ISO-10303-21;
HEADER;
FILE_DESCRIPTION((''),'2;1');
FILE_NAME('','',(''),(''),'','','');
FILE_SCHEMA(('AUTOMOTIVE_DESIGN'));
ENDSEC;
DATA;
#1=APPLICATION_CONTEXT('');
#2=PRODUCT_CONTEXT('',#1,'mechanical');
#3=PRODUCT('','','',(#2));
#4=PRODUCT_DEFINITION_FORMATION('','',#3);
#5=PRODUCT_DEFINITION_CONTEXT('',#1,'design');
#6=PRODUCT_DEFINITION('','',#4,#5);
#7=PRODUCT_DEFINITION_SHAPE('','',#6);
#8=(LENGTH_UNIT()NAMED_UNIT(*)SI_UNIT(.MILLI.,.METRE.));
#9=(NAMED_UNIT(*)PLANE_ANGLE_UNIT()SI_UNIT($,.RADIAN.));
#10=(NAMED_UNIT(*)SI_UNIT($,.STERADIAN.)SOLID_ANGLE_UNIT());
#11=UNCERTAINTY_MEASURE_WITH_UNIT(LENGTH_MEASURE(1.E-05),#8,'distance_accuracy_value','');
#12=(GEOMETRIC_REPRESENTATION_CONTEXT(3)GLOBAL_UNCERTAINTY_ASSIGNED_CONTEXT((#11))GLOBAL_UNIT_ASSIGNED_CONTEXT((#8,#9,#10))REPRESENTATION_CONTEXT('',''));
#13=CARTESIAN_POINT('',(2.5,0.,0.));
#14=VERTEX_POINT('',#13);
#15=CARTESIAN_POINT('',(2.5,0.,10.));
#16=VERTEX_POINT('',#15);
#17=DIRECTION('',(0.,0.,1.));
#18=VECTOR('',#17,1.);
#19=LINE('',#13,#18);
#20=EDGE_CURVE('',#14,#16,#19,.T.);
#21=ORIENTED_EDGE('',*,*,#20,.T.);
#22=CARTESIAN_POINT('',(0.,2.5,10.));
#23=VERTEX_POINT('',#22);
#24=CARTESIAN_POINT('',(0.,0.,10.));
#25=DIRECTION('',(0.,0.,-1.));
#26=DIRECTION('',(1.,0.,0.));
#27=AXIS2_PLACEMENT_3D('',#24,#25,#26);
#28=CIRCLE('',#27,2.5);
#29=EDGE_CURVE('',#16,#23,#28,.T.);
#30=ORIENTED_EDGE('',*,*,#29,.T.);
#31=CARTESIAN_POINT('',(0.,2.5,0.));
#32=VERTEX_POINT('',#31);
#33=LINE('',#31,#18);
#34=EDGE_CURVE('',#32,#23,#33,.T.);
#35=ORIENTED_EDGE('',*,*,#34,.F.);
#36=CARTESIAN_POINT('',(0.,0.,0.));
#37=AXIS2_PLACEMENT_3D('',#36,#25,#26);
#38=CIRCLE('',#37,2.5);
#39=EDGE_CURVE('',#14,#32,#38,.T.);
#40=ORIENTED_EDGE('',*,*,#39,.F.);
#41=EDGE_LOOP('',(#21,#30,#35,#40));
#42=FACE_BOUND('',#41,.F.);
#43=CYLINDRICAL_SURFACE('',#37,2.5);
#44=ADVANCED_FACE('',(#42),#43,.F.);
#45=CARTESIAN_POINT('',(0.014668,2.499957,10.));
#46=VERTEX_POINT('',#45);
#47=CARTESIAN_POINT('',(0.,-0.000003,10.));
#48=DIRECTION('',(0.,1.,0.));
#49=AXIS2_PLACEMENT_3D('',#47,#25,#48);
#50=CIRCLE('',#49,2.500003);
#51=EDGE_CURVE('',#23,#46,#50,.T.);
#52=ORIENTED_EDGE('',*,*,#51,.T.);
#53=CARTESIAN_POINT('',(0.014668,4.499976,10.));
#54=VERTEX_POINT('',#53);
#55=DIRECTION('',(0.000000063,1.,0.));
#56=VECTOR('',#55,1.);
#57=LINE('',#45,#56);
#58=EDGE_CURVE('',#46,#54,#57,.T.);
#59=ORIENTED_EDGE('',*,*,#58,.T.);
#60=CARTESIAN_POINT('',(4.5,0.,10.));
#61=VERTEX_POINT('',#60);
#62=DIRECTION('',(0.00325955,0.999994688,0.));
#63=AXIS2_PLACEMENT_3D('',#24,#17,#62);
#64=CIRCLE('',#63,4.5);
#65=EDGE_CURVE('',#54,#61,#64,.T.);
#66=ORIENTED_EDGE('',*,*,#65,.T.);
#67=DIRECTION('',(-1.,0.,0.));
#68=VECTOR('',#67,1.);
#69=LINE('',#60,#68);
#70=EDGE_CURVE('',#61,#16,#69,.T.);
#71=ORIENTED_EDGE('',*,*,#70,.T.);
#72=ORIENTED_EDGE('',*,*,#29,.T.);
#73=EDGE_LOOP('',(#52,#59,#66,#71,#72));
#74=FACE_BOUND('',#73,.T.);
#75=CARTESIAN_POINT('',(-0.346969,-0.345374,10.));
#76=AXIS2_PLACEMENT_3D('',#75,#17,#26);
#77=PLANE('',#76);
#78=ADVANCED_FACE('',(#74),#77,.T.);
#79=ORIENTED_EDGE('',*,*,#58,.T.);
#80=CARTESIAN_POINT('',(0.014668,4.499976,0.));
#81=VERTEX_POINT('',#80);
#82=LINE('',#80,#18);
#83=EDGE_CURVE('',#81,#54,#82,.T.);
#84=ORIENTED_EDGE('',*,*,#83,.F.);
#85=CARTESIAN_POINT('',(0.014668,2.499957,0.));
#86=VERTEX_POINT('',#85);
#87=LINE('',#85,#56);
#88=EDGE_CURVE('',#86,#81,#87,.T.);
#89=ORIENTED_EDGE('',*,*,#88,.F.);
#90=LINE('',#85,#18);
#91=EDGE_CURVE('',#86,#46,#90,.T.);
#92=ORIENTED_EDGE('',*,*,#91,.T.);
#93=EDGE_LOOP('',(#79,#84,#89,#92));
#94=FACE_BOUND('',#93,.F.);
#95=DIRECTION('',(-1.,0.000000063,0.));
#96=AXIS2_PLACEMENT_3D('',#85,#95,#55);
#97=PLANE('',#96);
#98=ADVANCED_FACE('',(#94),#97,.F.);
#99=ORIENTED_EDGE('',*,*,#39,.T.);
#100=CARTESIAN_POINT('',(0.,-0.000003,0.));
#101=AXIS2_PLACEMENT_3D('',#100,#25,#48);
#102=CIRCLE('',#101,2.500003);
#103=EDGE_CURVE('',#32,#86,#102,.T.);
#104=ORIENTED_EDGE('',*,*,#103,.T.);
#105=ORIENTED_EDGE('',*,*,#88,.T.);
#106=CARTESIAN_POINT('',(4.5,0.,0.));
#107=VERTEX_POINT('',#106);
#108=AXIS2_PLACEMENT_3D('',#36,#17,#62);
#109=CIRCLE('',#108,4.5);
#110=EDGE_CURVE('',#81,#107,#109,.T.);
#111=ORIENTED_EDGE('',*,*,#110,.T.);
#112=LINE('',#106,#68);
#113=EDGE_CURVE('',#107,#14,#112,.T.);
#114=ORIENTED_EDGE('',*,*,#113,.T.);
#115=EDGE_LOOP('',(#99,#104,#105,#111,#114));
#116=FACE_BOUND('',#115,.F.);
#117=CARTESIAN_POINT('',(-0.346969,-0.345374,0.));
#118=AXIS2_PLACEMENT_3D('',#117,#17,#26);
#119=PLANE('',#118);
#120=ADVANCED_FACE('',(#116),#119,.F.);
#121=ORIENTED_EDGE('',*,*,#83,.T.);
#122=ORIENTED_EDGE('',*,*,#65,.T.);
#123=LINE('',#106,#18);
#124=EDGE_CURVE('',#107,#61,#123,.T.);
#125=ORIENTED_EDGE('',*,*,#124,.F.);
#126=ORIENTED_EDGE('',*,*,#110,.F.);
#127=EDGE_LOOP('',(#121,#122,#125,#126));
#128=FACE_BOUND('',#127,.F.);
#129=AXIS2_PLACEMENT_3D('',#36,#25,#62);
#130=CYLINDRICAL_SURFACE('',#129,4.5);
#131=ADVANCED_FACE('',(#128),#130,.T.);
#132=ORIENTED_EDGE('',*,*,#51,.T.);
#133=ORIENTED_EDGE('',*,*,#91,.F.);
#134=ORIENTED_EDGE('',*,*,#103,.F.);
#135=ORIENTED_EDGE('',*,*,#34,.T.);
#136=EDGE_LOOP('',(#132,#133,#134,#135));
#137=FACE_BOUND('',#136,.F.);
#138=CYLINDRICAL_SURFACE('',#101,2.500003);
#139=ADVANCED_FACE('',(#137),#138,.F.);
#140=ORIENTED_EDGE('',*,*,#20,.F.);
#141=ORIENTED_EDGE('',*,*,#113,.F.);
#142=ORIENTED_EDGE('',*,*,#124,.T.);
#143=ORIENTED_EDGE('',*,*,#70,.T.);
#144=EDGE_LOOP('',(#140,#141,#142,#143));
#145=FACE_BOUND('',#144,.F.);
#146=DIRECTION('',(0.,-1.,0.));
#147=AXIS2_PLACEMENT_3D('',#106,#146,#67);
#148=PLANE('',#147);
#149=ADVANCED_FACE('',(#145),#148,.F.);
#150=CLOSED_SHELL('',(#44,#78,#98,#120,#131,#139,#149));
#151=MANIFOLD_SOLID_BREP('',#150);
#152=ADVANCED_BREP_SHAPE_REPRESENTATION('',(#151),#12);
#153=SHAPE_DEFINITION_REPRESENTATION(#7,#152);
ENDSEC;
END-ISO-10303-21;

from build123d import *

# Parameters (mm, degrees)
F1_DEPTH = 10


# Not quite as in the source:
# - ends of sketch curves that miss each other by under 0.0002 mm in the source are joined


with BuildPart() as f1:
    # F0 (on Top) → F1 (new body)
    with BuildSketch(Plane.XY):
        with BuildLine():
            ThreePointArc((2.5, 0), (-1.767766953, -1.767766953), (0, 2.5))
            ThreePointArc((0, 2.5), (0.0073339568, 2.4999892426), (0.0146678504, 2.4999569705))
            Line((0.0146678504, 2.4999569705), (0.0146679766, 4.4999760944))
            ThreePointArc((0.0146679766, 4.4999760944), (-3.1871622092, -3.1767903696), (4.5, 0))
            Line((4.5, 0), (2.5, 0))
        make_face()
    extrude(amount=F1_DEPTH)


solid = f1.part
